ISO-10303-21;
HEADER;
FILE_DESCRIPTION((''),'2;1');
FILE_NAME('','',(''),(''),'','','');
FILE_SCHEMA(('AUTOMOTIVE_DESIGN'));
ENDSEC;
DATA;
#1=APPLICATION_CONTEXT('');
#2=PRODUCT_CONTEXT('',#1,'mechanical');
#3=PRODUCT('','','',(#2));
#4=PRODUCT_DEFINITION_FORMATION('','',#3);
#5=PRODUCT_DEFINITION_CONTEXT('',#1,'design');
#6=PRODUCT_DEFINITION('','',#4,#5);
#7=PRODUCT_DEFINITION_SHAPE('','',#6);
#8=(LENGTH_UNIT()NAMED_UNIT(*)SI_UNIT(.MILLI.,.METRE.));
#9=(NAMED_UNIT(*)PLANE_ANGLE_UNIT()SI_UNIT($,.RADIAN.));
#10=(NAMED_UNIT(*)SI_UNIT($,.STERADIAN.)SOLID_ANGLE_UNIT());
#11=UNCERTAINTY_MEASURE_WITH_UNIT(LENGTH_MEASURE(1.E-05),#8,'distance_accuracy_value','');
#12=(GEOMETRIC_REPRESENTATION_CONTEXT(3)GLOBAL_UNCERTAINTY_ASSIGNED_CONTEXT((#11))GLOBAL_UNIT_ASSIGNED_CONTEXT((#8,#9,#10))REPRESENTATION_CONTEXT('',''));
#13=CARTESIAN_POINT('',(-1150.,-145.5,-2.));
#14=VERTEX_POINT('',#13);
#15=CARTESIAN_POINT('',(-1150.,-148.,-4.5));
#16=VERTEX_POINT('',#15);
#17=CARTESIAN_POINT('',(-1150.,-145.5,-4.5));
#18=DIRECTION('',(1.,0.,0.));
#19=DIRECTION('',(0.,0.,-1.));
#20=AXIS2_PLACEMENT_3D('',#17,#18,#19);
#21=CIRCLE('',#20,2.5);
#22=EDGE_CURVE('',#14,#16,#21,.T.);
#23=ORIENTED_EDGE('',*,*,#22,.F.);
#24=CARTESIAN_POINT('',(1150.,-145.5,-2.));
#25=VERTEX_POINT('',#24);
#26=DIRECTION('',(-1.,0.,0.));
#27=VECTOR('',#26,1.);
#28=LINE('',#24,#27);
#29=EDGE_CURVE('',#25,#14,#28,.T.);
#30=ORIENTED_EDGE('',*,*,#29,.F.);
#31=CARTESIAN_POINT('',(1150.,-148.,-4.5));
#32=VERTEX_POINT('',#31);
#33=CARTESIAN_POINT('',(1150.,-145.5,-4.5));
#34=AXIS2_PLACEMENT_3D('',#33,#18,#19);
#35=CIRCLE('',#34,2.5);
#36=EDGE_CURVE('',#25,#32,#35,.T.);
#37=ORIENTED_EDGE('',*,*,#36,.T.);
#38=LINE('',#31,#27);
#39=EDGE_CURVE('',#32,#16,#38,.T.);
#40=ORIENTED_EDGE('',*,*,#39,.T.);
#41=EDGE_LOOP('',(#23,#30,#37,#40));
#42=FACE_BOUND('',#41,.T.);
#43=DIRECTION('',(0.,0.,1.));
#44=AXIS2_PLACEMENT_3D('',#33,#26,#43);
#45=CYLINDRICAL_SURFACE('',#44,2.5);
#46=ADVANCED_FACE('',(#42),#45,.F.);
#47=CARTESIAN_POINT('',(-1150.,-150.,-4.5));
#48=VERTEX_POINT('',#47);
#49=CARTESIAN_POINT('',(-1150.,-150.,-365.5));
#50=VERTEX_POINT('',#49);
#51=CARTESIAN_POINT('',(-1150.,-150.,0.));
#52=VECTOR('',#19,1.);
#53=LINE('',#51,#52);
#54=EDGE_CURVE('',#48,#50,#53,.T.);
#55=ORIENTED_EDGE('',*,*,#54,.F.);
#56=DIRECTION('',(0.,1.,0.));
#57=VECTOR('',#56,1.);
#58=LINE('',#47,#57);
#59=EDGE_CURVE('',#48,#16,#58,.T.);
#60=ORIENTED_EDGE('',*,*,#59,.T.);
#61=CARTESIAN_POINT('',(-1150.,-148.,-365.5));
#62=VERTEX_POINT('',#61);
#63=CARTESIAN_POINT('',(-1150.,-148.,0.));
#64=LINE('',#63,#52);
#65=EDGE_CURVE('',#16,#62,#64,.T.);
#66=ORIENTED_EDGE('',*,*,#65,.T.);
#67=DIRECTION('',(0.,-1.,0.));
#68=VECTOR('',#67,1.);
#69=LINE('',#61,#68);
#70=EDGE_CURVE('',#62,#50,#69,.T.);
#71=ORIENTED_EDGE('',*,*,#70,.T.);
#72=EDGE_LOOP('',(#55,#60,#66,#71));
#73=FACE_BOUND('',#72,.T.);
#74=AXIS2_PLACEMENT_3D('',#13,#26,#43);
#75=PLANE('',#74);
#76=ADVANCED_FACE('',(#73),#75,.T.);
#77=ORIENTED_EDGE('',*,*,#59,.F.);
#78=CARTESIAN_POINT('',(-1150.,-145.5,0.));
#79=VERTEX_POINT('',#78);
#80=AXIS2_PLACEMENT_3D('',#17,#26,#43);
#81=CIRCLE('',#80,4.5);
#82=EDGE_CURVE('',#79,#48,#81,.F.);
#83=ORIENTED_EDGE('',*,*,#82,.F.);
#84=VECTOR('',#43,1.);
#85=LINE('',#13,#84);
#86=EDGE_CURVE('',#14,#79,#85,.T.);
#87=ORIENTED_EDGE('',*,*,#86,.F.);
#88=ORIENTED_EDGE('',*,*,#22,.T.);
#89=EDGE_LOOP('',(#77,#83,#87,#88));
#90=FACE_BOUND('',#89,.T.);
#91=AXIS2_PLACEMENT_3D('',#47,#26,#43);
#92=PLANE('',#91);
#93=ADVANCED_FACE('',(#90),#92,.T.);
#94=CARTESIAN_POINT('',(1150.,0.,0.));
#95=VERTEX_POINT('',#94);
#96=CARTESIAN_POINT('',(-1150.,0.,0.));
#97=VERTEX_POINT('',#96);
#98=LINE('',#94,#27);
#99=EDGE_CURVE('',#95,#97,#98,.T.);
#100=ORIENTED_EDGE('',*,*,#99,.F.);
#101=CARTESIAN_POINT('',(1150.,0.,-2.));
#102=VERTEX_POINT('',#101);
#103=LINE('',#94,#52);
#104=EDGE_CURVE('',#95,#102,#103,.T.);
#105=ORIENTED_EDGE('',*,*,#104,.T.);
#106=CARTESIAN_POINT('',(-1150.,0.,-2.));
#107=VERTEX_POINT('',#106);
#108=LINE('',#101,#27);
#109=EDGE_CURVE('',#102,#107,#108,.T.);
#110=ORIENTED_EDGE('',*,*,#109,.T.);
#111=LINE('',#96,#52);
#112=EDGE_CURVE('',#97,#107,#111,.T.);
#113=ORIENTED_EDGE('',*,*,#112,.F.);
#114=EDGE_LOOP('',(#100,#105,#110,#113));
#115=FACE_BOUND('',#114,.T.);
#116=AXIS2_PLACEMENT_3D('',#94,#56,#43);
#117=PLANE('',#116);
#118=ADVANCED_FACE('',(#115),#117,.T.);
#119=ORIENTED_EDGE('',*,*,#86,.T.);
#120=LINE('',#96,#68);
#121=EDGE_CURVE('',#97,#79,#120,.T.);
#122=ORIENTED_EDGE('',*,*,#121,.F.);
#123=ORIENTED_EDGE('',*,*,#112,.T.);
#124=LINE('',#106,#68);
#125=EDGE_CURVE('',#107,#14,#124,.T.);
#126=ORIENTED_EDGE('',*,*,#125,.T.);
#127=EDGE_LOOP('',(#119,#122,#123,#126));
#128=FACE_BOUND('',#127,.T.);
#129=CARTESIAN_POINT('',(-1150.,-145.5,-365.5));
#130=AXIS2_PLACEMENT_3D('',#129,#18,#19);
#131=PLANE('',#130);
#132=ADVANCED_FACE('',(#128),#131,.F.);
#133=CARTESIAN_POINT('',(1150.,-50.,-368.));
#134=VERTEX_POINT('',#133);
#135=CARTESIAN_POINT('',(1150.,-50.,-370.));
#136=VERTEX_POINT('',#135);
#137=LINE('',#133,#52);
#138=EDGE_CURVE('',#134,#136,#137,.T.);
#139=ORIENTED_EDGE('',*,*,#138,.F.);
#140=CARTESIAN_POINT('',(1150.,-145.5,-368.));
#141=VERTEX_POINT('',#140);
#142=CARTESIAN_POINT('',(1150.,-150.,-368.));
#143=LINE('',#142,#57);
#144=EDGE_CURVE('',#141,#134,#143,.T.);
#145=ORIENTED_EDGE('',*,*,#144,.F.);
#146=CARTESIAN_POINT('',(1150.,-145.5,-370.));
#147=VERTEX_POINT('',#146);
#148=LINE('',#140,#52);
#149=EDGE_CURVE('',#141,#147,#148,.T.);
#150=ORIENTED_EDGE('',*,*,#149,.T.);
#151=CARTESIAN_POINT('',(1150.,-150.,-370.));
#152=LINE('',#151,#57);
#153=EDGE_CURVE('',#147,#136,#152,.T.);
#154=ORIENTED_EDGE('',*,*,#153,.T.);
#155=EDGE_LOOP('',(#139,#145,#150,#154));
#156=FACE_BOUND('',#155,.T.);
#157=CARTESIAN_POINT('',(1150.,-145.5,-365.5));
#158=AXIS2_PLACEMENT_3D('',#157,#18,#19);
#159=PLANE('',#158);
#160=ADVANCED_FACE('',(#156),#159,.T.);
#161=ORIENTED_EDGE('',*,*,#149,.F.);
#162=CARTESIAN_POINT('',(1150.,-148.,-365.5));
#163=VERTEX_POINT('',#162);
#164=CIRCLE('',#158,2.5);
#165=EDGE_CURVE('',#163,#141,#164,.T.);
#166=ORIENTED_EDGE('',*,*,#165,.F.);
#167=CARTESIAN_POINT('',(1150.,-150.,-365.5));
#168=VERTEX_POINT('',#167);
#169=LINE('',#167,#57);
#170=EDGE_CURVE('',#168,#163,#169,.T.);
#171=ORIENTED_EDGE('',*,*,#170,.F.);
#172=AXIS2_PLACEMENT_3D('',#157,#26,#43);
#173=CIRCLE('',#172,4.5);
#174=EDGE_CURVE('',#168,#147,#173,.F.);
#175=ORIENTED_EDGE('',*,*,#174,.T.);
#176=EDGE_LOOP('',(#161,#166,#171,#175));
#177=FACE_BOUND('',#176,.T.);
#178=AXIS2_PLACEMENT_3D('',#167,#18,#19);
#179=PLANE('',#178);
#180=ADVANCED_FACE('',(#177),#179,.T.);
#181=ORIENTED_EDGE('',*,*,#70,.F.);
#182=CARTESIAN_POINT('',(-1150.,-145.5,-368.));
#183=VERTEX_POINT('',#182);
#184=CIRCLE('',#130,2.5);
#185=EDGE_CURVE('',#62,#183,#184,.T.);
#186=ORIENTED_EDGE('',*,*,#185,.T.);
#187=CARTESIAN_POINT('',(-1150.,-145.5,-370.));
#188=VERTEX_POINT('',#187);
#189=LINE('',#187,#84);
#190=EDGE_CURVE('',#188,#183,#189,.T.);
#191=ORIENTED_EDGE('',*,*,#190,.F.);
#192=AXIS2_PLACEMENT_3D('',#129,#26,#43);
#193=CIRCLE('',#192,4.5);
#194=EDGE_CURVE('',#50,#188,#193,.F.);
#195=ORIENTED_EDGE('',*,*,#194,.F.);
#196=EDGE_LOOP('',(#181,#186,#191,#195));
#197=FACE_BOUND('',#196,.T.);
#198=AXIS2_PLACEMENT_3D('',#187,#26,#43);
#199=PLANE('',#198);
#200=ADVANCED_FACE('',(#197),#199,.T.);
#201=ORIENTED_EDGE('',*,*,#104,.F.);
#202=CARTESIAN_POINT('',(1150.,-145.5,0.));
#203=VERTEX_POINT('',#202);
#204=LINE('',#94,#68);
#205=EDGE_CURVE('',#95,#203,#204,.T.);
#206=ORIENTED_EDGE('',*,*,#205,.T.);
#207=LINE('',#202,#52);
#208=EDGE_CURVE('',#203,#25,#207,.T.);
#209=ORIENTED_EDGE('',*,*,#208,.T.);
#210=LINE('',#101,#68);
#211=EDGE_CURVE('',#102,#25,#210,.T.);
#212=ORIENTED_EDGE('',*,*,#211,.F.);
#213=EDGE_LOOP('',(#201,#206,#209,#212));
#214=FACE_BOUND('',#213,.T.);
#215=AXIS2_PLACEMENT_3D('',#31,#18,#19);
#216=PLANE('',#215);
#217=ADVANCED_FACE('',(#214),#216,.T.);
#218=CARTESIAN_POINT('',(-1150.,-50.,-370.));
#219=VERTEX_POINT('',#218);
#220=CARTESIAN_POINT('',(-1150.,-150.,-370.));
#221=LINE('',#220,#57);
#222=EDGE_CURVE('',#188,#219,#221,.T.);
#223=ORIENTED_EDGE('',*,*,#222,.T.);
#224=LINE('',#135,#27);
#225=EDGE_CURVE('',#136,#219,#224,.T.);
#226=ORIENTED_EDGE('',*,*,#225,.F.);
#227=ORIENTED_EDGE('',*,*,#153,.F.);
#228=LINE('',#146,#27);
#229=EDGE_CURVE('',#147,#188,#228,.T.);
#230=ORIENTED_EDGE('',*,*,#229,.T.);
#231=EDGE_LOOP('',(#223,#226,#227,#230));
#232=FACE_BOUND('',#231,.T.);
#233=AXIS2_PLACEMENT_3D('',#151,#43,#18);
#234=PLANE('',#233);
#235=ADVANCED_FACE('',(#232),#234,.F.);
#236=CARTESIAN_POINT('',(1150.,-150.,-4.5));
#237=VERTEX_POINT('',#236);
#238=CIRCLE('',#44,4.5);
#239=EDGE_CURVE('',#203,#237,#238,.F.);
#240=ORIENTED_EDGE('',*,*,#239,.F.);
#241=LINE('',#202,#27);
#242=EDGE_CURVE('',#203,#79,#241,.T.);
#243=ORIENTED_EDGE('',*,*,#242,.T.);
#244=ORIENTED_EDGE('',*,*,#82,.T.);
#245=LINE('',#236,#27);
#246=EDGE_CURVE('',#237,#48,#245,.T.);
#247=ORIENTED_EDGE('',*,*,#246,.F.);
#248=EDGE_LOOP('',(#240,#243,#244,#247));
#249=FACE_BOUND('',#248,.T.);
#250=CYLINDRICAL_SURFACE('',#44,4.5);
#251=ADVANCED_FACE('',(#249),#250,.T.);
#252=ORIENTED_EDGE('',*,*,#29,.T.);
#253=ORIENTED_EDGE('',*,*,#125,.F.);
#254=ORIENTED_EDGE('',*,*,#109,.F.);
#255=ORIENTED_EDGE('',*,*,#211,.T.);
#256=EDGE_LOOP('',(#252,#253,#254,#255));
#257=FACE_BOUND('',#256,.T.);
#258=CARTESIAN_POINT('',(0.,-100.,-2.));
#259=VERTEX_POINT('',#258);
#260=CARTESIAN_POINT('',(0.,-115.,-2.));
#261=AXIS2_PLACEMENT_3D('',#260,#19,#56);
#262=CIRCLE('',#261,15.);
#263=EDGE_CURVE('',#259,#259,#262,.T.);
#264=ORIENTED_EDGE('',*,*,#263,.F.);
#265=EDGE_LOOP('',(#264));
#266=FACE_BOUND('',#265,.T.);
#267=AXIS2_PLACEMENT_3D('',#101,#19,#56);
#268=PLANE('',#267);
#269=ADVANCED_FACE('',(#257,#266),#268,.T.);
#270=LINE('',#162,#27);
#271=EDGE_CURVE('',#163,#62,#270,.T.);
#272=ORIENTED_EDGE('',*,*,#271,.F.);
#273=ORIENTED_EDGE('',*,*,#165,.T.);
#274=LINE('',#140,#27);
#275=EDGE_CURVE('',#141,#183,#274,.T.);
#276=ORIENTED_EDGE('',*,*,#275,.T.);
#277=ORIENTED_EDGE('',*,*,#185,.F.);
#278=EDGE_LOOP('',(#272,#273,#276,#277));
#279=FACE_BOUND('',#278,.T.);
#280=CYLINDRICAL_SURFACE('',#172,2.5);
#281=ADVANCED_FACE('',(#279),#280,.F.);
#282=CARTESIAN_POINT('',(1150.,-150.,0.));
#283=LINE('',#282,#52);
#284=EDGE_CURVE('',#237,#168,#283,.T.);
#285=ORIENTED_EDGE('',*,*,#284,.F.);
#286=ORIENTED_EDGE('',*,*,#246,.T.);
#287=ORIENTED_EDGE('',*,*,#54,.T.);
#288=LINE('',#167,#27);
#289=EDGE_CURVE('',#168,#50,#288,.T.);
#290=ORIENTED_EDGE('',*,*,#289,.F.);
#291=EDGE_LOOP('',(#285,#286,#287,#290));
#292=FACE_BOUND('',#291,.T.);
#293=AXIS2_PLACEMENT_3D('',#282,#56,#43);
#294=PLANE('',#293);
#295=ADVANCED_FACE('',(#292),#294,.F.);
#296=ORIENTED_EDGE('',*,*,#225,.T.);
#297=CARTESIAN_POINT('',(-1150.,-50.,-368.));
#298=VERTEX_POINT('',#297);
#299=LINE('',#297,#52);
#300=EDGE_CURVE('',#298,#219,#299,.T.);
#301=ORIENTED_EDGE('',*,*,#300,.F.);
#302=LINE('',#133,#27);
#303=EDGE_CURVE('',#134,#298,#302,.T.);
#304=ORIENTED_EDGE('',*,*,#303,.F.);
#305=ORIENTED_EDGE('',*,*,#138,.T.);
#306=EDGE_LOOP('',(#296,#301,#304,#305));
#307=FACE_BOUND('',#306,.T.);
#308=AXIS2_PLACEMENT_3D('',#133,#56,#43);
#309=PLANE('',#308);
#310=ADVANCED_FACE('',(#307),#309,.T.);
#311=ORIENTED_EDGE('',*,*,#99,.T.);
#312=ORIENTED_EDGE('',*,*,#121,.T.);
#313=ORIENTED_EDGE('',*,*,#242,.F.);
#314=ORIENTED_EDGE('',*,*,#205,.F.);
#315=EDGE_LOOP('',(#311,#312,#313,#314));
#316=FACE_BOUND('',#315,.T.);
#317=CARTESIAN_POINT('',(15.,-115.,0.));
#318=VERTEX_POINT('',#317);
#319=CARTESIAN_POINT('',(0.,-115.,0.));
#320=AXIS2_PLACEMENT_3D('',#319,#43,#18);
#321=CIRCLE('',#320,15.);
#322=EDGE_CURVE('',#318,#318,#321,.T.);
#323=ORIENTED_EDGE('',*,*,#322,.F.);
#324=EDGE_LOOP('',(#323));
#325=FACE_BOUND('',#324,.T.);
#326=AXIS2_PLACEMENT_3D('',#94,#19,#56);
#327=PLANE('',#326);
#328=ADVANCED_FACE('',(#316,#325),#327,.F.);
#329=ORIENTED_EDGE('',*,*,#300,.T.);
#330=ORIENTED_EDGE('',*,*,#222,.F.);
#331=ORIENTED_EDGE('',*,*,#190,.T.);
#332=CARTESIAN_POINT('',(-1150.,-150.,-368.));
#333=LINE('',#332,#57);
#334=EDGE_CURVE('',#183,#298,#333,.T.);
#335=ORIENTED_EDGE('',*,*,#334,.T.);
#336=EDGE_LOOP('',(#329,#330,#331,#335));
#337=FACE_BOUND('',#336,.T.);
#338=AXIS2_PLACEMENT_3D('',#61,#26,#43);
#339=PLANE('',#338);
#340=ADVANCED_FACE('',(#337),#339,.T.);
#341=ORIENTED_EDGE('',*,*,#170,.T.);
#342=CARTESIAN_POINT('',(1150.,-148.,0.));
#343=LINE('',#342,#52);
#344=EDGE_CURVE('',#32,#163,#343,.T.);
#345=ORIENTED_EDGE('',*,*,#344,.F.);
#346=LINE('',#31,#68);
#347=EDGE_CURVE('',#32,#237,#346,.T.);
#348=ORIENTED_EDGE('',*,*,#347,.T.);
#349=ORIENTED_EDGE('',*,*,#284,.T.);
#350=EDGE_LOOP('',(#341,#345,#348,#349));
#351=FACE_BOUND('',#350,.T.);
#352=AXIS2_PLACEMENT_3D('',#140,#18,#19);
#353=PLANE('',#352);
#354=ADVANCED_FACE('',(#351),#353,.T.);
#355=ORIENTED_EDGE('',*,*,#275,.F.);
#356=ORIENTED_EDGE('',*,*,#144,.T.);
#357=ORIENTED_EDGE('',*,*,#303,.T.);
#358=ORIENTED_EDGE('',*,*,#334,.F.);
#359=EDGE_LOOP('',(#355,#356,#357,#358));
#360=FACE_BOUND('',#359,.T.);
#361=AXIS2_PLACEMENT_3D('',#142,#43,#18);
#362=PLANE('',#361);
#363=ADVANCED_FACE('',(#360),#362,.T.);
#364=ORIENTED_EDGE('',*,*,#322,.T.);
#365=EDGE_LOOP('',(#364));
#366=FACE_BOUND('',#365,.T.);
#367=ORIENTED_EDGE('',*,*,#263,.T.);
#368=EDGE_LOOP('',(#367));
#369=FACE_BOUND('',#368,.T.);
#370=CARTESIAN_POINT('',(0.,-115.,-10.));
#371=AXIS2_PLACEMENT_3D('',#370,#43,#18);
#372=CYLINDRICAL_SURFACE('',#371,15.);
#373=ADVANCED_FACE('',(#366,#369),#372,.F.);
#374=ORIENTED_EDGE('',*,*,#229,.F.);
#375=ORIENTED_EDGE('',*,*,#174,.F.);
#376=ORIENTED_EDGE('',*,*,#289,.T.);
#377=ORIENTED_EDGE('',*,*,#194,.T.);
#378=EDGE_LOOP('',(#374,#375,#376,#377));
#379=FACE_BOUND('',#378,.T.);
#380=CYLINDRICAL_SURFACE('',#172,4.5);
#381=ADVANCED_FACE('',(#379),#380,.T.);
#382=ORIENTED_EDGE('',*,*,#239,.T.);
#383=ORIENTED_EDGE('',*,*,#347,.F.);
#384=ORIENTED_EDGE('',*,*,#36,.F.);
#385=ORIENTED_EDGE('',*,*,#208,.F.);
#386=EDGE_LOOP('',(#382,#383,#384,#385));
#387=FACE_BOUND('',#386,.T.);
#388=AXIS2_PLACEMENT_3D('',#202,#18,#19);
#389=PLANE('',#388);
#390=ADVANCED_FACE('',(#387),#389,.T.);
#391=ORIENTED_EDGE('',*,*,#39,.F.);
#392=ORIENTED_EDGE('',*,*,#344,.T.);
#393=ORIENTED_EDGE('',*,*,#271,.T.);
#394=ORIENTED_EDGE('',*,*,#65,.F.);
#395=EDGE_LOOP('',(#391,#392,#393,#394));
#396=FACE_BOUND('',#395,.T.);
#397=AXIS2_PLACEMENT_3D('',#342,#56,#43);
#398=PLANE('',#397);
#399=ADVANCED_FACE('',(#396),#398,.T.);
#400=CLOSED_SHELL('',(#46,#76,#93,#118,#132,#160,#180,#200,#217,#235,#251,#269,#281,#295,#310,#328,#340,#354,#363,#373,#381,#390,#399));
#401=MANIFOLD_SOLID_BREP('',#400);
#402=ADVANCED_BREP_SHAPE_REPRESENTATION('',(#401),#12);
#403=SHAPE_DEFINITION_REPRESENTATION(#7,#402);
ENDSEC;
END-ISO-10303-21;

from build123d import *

# Parameters (mm, degrees)
BASE_FLANGE1_DEPTH = 1150
SKETCH2_R          = 15
CUT_EXTRUDE1_DEPTH = 10


# Sheet-metal steps are written as plain solids
with BuildPart() as part:
    # Sketch1 → Base-Flange1 (new, symmetric)
    with BuildSketch(Plane(origin=(0, 0, 0), x_dir=(0, 0, -1), z_dir=(1, 0, 0))):
        with BuildLine():
            Line((0, 0), (0, -145.5))
            ThreePointArc((0, -145.5), (1.318019485, -148.681980515), (4.5, -150))
            Line((4.5, -150), (365.5, -150))
            ThreePointArc((365.5, -150), (368.681980515, -148.681980515), (370, -145.5))
            Line((370, -145.5), (370, -50))
            Line((370, -50), (368, -50))
            Line((368, -50), (368, -145.5))
            ThreePointArc((368, -145.5), (367.267766953, -147.267766953), (365.5, -148))
            Line((365.5, -148), (4.5, -148))
            ThreePointArc((4.5, -148), (2.732233047, -147.267766953), (2, -145.5))
            Line((2, -145.5), (2, 0))
            Line((2, 0), (0, 0))
        make_face()
    extrude(amount=BASE_FLANGE1_DEPTH, both=True)

    # Sketch2 → Cut-Extrude1 (cut)
    with BuildSketch(Plane.XY):
        with Locations((0, -115)):
            Circle(SKETCH2_R)
    extrude(amount=-CUT_EXTRUDE1_DEPTH, mode=Mode.SUBTRACT)


solid = part.part
